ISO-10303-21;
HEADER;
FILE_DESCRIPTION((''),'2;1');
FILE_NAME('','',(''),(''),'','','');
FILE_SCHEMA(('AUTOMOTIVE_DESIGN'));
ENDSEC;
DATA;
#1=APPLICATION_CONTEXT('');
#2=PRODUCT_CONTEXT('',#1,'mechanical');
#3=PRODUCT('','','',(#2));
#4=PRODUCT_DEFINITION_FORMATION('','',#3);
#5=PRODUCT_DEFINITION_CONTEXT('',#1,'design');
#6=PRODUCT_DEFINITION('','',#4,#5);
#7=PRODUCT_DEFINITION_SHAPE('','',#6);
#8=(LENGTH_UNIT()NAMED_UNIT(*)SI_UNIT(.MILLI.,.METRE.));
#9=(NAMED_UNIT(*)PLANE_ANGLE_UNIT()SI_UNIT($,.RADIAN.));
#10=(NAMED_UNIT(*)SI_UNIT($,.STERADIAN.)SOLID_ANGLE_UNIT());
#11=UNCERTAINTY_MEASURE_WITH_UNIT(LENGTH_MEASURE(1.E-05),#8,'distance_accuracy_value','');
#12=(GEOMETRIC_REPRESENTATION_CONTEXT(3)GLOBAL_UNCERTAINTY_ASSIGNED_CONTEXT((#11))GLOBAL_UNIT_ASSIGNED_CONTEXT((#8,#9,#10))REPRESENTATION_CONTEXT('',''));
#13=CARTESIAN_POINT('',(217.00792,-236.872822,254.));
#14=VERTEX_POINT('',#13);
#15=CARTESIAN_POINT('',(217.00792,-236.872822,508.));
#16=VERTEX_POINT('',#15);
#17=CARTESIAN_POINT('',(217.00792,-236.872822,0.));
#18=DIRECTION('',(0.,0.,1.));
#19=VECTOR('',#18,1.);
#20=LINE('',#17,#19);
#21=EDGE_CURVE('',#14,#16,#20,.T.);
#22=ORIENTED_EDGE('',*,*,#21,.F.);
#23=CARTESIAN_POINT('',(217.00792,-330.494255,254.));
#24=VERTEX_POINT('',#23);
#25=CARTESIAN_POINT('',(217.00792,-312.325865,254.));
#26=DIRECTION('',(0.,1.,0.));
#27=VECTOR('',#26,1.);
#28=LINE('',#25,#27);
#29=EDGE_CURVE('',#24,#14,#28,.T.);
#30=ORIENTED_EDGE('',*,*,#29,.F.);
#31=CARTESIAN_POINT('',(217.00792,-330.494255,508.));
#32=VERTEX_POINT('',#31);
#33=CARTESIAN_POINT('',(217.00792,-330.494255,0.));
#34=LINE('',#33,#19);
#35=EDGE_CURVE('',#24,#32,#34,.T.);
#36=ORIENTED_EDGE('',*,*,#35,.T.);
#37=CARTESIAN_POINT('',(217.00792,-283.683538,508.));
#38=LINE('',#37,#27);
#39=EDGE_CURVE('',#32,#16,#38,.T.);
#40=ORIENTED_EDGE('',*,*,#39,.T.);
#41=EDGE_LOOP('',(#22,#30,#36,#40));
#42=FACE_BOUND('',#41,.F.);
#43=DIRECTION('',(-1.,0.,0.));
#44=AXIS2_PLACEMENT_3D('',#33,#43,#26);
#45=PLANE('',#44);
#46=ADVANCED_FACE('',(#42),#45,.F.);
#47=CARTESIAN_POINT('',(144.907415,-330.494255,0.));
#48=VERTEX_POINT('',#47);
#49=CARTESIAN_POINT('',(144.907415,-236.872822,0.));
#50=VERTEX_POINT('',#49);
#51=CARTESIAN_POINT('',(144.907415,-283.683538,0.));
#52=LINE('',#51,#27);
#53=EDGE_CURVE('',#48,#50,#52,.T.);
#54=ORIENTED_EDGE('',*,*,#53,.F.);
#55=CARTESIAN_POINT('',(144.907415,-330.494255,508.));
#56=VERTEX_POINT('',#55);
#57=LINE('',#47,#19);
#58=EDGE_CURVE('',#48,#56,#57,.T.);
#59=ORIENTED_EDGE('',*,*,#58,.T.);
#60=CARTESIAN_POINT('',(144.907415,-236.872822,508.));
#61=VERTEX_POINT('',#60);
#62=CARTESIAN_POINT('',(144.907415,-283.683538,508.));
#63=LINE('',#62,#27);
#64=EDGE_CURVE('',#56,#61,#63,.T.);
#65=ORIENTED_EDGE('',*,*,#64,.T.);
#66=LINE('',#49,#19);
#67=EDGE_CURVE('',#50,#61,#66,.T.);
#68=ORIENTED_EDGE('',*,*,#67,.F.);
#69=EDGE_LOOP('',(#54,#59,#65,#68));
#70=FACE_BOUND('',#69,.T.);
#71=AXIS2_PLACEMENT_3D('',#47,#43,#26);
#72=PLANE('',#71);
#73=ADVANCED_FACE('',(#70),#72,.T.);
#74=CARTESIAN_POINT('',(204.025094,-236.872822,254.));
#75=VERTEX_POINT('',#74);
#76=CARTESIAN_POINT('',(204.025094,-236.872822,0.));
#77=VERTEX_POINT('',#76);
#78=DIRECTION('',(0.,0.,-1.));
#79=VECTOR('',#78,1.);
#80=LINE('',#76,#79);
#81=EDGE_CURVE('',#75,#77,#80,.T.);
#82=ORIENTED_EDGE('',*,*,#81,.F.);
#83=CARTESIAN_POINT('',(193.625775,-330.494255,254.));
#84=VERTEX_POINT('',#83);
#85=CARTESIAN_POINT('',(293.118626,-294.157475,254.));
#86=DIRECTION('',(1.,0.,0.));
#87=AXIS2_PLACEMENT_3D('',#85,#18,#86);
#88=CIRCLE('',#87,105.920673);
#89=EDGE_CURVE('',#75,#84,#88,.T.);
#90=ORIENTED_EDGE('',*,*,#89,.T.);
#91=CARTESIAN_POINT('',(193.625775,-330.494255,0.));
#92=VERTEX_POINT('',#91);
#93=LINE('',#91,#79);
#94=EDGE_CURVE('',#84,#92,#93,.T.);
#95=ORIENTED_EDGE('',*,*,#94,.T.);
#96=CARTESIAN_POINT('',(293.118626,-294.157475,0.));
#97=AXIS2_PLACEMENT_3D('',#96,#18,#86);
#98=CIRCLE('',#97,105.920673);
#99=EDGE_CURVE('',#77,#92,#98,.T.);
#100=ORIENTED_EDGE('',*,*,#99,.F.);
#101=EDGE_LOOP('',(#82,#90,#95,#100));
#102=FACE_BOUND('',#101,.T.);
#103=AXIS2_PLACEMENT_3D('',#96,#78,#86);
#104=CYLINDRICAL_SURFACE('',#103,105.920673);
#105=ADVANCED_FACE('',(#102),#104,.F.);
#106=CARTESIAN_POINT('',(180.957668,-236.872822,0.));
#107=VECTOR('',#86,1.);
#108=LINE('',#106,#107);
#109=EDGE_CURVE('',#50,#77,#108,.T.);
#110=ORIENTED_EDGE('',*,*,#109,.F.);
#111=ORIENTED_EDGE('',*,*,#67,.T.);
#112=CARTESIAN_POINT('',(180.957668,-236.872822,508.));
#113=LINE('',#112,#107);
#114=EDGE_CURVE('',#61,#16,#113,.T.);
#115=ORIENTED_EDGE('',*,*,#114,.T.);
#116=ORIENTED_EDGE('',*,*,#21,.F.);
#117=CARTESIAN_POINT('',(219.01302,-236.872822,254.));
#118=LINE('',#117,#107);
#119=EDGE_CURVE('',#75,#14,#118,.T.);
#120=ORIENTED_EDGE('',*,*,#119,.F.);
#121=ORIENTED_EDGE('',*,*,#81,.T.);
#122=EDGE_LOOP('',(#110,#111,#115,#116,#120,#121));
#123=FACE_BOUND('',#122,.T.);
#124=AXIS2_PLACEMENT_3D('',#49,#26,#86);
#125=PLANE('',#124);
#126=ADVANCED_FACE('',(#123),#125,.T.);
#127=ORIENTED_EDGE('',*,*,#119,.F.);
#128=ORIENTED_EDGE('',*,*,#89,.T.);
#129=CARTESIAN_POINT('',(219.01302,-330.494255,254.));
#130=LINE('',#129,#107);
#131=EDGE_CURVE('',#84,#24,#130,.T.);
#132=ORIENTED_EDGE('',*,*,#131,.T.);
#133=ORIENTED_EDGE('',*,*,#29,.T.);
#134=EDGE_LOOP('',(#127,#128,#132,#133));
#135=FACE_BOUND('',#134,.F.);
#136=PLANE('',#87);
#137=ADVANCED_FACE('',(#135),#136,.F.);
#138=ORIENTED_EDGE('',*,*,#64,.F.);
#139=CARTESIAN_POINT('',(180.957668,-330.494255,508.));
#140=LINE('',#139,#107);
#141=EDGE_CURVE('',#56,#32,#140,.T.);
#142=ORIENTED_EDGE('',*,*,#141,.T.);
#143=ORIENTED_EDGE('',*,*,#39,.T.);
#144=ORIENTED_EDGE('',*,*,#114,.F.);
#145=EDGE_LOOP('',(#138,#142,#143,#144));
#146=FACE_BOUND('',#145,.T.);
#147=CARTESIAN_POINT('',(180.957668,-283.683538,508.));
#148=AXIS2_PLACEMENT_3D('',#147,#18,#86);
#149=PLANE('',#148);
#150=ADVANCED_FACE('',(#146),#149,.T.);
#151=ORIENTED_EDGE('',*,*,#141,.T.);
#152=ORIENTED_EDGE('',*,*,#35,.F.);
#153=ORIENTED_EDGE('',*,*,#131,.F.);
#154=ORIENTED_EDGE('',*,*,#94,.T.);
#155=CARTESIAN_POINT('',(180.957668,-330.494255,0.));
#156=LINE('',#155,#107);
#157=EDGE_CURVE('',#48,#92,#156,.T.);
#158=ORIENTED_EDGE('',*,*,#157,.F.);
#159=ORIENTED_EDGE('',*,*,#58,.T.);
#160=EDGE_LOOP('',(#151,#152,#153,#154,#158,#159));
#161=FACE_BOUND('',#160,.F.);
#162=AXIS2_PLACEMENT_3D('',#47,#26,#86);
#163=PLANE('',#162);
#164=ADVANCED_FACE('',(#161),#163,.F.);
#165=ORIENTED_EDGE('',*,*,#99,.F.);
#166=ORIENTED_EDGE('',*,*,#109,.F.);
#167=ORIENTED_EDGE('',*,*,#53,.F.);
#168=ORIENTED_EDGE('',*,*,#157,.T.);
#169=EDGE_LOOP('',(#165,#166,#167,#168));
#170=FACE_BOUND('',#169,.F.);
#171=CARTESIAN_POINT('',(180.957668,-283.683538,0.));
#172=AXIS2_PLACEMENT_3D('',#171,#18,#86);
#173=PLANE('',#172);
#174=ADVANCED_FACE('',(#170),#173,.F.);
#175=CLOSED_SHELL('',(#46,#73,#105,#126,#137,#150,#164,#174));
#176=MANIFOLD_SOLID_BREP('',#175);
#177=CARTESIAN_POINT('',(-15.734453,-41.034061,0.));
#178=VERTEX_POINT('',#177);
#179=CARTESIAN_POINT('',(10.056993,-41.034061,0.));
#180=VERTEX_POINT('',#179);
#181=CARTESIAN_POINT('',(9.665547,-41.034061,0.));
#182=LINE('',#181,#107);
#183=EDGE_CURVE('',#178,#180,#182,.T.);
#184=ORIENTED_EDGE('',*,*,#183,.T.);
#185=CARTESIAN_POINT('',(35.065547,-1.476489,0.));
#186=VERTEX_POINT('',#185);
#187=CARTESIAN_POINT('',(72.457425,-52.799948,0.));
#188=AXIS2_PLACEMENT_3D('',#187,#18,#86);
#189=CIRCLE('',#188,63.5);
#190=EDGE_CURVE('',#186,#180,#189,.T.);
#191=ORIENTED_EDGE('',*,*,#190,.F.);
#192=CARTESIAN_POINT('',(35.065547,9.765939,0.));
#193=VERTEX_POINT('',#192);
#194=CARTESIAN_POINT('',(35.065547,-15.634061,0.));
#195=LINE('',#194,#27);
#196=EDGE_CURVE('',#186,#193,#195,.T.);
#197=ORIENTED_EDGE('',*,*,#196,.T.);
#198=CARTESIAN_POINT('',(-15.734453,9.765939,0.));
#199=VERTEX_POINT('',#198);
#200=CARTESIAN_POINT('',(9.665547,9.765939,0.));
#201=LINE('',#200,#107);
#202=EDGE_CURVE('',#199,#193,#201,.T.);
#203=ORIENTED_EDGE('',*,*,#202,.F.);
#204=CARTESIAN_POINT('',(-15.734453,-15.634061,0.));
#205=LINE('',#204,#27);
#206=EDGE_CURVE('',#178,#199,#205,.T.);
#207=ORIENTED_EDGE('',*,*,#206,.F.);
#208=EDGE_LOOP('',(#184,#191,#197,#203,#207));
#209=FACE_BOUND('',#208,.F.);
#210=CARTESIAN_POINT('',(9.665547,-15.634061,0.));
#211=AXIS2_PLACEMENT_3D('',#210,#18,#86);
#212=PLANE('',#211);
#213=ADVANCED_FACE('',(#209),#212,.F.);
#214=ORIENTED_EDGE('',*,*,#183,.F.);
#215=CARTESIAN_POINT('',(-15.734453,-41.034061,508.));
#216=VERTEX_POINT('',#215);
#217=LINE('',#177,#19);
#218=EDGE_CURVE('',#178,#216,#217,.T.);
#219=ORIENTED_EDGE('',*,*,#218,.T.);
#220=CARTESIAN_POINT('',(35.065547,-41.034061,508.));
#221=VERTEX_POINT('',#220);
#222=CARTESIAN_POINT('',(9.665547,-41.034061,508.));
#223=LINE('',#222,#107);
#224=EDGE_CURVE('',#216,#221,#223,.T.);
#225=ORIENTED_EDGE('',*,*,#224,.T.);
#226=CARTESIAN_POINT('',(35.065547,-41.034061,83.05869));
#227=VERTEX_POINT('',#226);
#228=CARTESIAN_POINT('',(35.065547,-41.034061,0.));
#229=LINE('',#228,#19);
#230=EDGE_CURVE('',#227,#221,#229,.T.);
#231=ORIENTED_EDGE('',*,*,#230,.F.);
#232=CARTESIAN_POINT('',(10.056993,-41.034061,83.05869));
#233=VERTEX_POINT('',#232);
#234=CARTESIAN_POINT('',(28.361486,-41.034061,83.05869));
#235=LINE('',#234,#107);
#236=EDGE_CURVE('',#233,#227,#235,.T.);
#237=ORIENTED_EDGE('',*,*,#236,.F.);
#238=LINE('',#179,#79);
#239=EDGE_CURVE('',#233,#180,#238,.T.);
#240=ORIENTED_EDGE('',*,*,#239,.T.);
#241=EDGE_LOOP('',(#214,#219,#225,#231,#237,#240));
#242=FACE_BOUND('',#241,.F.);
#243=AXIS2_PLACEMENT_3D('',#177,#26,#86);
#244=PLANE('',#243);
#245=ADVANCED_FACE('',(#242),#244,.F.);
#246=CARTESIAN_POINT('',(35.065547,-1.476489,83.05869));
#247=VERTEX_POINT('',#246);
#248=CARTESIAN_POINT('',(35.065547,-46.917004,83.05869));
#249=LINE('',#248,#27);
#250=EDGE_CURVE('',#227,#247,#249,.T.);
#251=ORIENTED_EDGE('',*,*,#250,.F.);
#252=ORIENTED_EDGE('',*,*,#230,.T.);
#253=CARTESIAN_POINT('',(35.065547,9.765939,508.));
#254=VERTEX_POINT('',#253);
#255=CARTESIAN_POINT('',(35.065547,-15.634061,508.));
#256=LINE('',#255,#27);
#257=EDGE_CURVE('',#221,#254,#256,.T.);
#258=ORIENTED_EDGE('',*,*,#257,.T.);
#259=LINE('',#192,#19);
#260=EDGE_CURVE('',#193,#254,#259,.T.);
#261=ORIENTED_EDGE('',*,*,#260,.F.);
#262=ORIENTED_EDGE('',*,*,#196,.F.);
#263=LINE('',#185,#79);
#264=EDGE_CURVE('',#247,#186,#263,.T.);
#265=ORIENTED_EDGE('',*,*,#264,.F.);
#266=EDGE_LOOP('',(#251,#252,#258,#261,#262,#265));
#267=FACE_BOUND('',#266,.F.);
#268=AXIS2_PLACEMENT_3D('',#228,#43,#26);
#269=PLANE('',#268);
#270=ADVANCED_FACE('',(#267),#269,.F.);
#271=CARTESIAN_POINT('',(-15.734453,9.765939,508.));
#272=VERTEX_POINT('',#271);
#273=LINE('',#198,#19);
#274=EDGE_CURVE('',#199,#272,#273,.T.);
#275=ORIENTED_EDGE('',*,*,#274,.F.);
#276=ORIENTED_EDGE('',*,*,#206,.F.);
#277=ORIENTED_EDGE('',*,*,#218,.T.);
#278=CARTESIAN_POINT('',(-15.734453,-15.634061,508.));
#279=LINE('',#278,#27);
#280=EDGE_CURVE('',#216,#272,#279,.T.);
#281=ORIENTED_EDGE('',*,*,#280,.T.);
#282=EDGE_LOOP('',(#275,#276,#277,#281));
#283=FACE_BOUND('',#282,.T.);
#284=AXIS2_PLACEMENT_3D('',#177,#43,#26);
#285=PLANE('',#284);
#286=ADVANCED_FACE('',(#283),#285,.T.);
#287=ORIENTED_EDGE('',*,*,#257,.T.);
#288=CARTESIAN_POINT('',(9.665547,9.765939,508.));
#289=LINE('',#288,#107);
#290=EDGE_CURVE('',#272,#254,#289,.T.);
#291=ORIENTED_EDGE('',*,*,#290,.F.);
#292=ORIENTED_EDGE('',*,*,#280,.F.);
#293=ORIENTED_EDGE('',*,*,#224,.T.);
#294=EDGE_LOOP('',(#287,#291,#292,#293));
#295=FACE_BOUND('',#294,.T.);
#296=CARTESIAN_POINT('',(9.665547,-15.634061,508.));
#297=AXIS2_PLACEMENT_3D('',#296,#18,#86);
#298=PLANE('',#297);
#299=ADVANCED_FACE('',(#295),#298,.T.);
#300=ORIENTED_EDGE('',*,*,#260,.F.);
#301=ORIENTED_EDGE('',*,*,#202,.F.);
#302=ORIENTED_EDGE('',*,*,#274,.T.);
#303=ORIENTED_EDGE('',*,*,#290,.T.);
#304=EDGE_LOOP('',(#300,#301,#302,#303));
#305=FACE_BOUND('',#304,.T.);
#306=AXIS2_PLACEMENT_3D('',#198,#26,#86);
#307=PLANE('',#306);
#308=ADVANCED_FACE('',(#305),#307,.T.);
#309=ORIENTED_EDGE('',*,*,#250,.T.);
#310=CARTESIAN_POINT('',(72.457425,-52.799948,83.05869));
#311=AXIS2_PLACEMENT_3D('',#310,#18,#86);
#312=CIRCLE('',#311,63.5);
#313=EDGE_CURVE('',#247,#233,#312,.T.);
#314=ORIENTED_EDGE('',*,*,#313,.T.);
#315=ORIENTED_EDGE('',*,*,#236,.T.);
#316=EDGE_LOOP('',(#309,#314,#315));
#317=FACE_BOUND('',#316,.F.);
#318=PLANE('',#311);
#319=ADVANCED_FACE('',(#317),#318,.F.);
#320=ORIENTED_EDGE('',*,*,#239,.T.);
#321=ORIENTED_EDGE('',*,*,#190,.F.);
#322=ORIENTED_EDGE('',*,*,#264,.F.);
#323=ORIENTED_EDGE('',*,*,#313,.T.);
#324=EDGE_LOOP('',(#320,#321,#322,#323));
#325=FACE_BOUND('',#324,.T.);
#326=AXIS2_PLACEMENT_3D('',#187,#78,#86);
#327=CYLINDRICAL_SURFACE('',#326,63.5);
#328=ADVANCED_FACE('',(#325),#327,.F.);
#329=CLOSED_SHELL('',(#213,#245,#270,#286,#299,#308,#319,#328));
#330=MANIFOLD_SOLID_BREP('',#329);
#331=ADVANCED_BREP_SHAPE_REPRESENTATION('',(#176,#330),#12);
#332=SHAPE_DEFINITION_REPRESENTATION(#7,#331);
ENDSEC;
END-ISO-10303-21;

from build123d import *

# Parameters (mm, degrees)
F1_W     = 50.8
F1_H     = 50.8
F2_DEPTH = 508
F3_R     = 63.5
F4_DEPTH = 83.05869
F5_W     = 72.1005052328
F5_H     = 93.6214327812
F6_DEPTH = 508
F7_R     = 105.920672741
F8_DEPTH = 254


# Not quite as in the source:
# - a variable given as a bare number and used for a length is read in inches; the dataset says mm whatever the document's units were


with BuildPart() as f2:
    # F1 (on Top) → F2 (new body)
    with BuildSketch(Plane.XY):
        with Locations((9.6655465204, -15.6340606053)):
            Rectangle(F1_W, F1_H)
    extrude(amount=F2_DEPTH)

    # F3 (on Top) → F4 (cut)
    with BuildSketch(Plane.XY):
        with Locations((72.4574252963, -52.7999475598)):
            Circle(F3_R)
    extrude(amount=F4_DEPTH, mode=Mode.SUBTRACT)


with BuildPart() as f6:
    # F5 (on Top) → F6 (new body)
    with BuildSketch(Plane.XY):
        with Locations((180.9576675296, -283.6835384369)):
            Rectangle(F5_W, F5_H)
    extrude(amount=F6_DEPTH)

    # F7 (on Top) → F8 (cut)
    with BuildSketch(Plane.XY):
        with Locations((293.1186258793, -294.1574752331)):
            Circle(F7_R)
    extrude(amount=F8_DEPTH, mode=Mode.SUBTRACT)


solid = Compound([f2.part, f6.part])
